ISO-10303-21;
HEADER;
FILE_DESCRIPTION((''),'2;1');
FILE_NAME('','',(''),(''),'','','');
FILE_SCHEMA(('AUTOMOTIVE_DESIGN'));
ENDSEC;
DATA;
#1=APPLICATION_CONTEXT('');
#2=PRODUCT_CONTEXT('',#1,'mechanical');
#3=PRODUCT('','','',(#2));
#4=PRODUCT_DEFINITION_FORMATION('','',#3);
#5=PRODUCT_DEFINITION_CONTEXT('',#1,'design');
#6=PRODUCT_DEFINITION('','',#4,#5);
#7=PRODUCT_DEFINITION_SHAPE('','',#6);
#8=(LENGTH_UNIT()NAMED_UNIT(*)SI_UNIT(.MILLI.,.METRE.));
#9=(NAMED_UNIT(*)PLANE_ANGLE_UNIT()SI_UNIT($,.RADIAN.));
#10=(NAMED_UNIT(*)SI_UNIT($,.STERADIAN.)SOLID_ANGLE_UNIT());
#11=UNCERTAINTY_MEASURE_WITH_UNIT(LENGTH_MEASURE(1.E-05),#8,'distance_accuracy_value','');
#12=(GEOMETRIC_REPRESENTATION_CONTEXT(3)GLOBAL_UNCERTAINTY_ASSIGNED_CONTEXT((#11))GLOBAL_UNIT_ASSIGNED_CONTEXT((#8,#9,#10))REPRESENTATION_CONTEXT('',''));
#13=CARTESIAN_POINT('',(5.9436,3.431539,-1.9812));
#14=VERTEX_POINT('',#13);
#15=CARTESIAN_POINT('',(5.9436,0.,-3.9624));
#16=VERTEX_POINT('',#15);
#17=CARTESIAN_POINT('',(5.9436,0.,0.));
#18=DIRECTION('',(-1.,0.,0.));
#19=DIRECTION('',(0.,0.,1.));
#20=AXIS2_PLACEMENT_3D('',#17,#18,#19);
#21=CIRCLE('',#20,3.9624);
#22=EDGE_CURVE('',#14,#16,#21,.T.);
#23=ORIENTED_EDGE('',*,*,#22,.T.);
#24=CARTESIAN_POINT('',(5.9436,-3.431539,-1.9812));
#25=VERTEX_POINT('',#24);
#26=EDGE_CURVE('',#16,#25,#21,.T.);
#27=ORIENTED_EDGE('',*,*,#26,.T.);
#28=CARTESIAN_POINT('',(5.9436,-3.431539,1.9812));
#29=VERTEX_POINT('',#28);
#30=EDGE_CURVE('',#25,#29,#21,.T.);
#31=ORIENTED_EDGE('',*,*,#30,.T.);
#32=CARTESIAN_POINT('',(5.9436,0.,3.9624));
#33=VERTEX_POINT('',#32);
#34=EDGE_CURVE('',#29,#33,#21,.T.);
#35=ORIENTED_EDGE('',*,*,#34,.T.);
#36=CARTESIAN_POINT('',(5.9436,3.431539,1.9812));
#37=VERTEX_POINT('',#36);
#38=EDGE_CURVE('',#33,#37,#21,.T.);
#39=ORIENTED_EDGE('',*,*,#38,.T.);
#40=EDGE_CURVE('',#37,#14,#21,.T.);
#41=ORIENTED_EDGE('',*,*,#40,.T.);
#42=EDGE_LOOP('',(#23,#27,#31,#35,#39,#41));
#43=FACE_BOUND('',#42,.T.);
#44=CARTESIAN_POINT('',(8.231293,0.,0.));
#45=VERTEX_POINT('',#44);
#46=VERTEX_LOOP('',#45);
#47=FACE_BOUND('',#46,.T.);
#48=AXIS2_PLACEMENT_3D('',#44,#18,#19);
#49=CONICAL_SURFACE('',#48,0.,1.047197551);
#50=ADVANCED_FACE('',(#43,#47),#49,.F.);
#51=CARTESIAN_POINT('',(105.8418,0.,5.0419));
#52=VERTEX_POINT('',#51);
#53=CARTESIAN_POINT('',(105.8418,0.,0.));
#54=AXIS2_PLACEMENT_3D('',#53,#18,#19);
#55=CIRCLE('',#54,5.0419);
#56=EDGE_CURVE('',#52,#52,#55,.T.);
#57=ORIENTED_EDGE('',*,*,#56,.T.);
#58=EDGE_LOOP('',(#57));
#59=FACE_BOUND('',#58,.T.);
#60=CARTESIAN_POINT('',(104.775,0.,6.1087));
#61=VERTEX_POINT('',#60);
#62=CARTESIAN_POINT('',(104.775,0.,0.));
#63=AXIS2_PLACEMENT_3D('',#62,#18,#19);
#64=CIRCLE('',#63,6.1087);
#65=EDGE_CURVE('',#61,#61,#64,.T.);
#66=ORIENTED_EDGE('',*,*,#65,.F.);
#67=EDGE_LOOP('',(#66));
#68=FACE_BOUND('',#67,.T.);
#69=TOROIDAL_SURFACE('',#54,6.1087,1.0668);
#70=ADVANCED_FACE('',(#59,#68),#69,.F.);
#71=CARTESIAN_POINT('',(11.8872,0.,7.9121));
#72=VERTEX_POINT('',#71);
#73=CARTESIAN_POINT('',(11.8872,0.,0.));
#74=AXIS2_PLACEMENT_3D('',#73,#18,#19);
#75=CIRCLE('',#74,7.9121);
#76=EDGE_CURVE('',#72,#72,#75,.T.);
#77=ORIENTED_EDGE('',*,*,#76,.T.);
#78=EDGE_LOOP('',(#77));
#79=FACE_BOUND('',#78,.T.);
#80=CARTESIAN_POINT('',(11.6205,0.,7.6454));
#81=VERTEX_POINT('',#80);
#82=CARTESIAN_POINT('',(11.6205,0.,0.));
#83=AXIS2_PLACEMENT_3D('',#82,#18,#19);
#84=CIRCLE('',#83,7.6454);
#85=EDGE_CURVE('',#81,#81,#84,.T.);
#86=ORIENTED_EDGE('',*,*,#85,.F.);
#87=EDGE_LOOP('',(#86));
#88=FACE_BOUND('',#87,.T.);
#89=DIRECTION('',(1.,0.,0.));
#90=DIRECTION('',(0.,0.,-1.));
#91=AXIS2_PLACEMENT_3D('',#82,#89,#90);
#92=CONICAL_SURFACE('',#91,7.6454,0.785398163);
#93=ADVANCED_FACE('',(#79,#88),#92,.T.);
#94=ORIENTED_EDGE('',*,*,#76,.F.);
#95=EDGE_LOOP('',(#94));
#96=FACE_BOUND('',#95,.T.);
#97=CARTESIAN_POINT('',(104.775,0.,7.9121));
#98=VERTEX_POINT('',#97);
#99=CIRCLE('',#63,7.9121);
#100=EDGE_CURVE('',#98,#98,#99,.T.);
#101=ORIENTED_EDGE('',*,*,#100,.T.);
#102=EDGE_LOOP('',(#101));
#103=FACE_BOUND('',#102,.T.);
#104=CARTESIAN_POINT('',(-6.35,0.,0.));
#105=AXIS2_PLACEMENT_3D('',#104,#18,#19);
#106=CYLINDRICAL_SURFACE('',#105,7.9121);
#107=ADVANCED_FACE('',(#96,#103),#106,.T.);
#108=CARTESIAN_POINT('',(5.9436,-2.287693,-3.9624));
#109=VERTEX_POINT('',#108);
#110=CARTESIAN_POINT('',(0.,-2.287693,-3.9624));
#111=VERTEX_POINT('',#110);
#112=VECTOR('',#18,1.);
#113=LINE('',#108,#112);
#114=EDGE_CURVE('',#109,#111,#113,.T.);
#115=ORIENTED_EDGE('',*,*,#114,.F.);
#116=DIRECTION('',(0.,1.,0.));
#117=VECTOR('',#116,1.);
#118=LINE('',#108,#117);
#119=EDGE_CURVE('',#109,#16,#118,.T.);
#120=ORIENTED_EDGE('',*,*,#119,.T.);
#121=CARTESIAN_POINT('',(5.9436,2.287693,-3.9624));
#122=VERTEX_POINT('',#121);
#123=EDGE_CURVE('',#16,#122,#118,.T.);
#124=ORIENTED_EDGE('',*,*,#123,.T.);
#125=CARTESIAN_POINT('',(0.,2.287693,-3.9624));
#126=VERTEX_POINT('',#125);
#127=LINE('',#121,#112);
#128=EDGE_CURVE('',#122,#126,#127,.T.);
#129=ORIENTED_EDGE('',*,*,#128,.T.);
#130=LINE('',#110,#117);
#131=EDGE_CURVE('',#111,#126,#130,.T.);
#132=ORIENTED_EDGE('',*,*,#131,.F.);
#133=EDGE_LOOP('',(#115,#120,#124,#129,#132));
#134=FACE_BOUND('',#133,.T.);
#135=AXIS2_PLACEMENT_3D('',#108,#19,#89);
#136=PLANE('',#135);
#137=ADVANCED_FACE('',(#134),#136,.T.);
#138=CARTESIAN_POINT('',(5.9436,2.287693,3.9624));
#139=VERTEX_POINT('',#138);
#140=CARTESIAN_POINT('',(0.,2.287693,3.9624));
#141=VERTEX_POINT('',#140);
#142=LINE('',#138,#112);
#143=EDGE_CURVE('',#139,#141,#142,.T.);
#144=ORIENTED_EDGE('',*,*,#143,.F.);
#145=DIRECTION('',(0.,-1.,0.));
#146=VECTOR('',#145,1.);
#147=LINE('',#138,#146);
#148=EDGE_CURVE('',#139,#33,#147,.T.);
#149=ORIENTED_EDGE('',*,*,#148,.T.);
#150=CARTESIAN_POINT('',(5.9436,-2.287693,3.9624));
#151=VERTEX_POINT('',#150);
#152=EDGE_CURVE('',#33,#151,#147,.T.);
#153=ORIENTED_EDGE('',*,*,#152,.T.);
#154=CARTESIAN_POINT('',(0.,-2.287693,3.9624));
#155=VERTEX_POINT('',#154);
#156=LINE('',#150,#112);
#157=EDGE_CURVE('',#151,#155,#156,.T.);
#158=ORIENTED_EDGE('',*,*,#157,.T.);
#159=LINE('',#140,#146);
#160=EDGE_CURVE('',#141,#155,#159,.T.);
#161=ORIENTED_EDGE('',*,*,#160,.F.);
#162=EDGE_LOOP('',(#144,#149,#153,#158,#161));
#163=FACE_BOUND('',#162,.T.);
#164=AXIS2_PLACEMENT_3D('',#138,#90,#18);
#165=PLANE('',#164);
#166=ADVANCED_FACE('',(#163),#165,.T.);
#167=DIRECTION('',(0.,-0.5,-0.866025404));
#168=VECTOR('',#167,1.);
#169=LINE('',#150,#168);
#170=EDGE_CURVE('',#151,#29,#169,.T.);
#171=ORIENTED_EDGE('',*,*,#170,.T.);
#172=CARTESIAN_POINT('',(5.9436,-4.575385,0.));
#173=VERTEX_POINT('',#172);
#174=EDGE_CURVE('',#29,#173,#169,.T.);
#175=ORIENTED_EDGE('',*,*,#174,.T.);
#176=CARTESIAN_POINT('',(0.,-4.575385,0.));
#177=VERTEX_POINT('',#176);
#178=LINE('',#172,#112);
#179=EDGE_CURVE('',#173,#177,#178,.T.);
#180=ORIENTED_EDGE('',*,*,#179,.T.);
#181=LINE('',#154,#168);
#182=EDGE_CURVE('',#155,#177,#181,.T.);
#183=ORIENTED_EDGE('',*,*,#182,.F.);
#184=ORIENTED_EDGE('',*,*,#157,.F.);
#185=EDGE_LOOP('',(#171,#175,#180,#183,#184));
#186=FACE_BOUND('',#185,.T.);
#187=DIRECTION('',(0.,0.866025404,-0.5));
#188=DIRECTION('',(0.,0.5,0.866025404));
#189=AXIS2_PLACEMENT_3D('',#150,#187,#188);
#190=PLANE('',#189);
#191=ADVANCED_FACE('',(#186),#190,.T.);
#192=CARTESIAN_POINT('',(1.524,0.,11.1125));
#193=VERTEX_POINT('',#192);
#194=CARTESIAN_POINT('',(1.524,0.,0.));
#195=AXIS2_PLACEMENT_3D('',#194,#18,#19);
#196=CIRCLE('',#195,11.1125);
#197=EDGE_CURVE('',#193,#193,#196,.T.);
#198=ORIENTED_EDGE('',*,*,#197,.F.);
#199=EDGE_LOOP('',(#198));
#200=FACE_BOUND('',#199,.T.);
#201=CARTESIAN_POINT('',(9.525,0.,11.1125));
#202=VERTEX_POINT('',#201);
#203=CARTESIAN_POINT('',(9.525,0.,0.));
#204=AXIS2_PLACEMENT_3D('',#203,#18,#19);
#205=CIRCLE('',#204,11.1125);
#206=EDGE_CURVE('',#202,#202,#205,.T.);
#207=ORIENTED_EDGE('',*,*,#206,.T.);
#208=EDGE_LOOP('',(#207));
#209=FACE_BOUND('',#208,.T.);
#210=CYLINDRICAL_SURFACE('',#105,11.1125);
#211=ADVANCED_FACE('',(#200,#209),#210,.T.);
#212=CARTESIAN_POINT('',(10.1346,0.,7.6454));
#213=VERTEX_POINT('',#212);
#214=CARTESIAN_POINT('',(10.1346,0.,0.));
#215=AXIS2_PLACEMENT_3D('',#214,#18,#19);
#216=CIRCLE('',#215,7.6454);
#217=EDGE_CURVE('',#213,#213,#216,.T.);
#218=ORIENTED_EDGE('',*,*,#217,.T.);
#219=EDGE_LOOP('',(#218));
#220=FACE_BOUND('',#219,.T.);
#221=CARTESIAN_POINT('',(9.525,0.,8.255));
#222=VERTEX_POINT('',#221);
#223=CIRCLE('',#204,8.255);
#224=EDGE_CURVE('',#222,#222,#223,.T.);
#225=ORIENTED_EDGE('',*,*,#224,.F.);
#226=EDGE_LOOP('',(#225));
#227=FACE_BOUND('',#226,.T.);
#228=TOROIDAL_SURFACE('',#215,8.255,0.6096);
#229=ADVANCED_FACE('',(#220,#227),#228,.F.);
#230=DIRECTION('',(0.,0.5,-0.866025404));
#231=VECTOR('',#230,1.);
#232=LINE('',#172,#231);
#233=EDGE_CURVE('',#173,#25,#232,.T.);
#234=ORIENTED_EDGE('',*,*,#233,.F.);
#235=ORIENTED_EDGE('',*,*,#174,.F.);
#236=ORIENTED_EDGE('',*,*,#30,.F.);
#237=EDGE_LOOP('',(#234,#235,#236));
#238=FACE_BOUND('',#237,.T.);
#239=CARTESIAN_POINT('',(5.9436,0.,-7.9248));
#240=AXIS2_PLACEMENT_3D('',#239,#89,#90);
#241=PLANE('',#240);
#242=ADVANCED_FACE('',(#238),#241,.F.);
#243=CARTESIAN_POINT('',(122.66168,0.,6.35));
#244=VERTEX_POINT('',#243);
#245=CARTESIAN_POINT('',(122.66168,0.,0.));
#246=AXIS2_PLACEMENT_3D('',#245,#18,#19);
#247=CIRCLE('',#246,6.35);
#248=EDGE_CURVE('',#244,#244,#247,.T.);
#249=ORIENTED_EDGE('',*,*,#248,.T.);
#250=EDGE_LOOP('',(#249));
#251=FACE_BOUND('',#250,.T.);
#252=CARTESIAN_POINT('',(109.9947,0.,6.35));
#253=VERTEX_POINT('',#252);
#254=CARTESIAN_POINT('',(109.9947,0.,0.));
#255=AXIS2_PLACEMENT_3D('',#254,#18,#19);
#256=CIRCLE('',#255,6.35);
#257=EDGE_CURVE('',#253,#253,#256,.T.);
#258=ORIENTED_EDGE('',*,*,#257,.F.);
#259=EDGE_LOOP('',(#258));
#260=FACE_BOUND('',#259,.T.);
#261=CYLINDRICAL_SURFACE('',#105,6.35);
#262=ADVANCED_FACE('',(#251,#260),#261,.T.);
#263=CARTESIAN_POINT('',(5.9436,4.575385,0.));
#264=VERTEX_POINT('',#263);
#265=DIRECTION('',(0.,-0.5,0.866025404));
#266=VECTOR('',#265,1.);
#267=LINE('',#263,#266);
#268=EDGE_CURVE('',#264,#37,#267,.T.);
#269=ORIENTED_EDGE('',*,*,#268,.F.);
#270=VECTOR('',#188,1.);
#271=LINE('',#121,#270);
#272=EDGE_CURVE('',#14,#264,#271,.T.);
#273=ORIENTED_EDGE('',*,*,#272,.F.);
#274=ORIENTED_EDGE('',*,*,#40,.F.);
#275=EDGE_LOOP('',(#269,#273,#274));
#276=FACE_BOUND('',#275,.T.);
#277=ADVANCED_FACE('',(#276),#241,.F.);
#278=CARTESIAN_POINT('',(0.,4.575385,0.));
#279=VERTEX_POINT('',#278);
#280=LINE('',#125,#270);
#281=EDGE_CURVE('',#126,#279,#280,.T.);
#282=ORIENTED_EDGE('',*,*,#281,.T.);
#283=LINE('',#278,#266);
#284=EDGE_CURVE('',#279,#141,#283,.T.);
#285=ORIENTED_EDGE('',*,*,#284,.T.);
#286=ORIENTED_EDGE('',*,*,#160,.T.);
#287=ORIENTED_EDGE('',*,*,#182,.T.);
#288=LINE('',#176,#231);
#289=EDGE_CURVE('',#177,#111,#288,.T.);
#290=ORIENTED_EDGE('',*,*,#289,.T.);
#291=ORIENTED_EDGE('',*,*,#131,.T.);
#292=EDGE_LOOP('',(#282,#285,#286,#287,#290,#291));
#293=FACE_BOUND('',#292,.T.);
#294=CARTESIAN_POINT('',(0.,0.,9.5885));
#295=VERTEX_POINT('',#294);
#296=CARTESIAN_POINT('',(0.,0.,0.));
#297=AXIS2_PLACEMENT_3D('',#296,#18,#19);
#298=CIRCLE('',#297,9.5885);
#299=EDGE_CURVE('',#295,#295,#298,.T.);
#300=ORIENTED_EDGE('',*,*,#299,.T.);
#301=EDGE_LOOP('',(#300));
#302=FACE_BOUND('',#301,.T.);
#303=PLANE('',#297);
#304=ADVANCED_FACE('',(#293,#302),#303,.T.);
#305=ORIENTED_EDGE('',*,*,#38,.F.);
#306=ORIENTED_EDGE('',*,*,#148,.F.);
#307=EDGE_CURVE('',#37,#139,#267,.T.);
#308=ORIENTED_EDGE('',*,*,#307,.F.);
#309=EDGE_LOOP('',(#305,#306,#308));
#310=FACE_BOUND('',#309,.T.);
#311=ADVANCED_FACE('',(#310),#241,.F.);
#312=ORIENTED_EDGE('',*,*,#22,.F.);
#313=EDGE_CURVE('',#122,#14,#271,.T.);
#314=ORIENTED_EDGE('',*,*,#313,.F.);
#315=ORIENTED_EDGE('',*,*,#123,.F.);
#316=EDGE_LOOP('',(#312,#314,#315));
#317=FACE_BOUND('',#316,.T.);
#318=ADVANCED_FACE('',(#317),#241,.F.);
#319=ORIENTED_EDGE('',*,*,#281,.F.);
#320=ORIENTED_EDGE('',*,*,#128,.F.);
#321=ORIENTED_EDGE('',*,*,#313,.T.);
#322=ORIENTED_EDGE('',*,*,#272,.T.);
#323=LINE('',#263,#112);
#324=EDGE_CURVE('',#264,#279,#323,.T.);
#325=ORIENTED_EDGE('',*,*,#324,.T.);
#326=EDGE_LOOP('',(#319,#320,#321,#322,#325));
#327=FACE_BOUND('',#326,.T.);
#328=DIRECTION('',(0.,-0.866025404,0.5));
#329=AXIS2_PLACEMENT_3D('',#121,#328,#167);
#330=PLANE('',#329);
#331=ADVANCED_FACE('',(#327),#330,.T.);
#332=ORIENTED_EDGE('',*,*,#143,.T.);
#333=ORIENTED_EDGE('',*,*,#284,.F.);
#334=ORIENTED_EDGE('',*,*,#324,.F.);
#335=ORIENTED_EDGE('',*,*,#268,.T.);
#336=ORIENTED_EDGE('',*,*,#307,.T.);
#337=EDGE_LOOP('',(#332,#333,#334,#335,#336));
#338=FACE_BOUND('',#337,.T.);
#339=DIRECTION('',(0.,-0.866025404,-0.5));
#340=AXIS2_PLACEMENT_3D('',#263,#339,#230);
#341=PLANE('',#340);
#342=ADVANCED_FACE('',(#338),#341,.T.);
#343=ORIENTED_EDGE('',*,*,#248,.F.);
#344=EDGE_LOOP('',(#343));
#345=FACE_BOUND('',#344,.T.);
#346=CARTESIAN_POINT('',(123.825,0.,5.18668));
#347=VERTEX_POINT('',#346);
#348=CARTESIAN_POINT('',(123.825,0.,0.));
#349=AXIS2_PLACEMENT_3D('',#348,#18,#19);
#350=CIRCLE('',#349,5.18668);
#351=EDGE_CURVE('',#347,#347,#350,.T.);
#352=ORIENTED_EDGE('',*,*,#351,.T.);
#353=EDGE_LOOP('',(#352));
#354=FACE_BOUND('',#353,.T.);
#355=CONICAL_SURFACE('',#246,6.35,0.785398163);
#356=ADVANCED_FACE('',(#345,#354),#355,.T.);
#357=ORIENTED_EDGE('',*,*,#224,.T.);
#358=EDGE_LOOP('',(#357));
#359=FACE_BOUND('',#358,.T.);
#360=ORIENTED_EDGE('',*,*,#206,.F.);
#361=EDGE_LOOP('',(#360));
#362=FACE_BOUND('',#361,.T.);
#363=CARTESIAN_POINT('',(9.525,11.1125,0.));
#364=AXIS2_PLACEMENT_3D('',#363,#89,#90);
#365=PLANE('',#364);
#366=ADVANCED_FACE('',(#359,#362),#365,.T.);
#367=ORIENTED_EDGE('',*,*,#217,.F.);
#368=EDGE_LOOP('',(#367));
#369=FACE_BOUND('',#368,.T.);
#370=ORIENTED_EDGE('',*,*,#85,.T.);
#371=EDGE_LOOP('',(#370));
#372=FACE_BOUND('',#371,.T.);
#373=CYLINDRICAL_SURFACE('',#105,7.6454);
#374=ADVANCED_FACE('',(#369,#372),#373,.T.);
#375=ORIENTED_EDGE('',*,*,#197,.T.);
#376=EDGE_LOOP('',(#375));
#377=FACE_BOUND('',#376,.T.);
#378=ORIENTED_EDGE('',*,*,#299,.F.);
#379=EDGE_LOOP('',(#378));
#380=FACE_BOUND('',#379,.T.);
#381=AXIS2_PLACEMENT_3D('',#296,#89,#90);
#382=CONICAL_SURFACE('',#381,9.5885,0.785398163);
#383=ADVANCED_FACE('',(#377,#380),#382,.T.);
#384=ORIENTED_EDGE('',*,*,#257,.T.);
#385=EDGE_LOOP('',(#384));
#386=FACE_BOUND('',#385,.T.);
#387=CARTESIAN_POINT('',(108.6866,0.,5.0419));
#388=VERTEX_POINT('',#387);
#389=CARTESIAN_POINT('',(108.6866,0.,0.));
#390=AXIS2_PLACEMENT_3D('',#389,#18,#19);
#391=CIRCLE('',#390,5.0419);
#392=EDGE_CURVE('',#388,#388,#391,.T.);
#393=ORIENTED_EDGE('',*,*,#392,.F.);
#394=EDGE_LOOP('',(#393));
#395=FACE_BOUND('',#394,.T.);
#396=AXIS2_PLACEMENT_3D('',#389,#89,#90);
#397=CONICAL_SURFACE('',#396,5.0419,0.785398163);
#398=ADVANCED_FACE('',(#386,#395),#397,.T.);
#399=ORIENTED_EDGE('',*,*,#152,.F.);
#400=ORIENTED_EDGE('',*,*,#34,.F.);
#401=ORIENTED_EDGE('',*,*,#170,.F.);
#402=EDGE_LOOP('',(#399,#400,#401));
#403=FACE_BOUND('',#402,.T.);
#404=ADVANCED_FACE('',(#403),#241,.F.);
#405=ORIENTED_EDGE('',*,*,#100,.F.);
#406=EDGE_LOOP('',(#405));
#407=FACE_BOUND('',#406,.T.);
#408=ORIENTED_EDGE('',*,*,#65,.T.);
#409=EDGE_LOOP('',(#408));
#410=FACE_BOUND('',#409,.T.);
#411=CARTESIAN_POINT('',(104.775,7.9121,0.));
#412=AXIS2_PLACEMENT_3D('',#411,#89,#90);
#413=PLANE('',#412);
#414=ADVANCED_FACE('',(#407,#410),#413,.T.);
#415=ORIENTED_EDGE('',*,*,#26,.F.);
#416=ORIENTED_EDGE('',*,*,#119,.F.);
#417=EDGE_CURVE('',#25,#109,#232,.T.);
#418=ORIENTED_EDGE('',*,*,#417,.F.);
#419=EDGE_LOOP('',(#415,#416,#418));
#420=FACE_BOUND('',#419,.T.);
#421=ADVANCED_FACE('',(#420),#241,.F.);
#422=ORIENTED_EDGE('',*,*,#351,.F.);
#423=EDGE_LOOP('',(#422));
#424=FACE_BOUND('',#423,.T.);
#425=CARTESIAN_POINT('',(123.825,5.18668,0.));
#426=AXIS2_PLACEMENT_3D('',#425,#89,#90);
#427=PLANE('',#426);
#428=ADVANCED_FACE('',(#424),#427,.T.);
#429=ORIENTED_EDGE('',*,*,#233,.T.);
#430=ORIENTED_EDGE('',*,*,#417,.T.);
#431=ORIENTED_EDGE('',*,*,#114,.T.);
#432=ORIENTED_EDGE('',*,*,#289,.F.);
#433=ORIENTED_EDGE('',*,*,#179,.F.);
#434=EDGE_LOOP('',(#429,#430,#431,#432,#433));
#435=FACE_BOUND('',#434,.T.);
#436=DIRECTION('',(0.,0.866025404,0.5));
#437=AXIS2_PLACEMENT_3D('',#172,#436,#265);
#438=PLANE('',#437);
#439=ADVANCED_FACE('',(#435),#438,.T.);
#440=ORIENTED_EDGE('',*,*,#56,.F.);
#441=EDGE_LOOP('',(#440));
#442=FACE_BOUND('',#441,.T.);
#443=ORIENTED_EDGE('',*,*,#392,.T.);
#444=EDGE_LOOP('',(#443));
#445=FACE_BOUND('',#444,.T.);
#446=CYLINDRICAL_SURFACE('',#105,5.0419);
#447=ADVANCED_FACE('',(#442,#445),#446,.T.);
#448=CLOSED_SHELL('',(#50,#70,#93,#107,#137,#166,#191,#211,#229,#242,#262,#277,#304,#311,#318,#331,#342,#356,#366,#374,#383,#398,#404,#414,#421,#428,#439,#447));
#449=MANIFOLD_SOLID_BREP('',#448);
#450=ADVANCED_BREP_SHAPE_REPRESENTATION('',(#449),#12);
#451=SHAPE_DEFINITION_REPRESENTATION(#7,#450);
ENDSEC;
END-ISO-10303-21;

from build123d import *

# Parameters (mm, degrees)
HEX_2_DEPTH = 5.9436


# Read off the part's stored shape, not the designer's step: ThreadSchematic
with BuildPart() as part:
    # ThreadSchematic outline → ThreadSchematic (revolve)
    with BuildSketch(Plane.YX):
        with BuildLine():
            Line((0, 123.825), (0, 0))
            Line((0, 0), (9.5885, 0))
            Line((9.5885, 0), (11.1125, 1.524))
            Line((11.1125, 1.524), (11.1125, 9.525))
            Line((11.1125, 9.525), (8.255, 9.525))
            ThreePointArc((8.255, 9.525), (7.823947706, 9.703547706), (7.6454, 10.1346))
            Line((7.6454, 10.1346), (7.6454, 11.6205))
            Line((7.6454, 11.6205), (7.9121, 11.8872))
            Line((7.9121, 11.8872), (7.9121, 104.775))
            Line((7.9121, 104.775), (6.1087, 104.775))
            ThreePointArc((6.1087, 104.775), (5.354358486, 105.087458486), (5.0419, 105.8418))
            Line((5.0419, 105.8418), (5.0419, 108.6866))
            Line((5.0419, 108.6866), (6.35, 109.9947))
            Line((6.35, 109.9947), (6.35, 122.66168))
            Line((6.35, 122.66168), (5.18668, 123.825))
            Line((5.18668, 123.825), (0, 123.825))
        make_face()
    revolve(axis=Axis((0, 0, 0), (1, 0, 0)))

    # Sketch2 → PreBroach (revolve, cut)
    with BuildSketch(Plane.XY, mode=Mode.PRIVATE) as prebroach_sk:
        Polygon((0, 3.9624), (5.9436, 3.9624), (8.231292707, 0), (0, 0), align=None)
    revolve(prebroach_sk.sketch.rotate(Axis((0, 0, 0), (1, 0, 0)), 90), axis=Axis((0, 0, 0), (1, 0, 0)), mode=Mode.SUBTRACT)

    # Sketch3 → Hex 2 (cut)
    with BuildSketch(Plane.ZY):
        Polygon((-3.9624, -2.287692707), (-3.9624, 2.287692707), (0, 4.575385413), (3.9624, 2.287692707), (3.9624, -2.287692707), (0, -4.575385413), align=None)
    extrude(amount=-HEX_2_DEPTH, mode=Mode.SUBTRACT)


solid = part.part
